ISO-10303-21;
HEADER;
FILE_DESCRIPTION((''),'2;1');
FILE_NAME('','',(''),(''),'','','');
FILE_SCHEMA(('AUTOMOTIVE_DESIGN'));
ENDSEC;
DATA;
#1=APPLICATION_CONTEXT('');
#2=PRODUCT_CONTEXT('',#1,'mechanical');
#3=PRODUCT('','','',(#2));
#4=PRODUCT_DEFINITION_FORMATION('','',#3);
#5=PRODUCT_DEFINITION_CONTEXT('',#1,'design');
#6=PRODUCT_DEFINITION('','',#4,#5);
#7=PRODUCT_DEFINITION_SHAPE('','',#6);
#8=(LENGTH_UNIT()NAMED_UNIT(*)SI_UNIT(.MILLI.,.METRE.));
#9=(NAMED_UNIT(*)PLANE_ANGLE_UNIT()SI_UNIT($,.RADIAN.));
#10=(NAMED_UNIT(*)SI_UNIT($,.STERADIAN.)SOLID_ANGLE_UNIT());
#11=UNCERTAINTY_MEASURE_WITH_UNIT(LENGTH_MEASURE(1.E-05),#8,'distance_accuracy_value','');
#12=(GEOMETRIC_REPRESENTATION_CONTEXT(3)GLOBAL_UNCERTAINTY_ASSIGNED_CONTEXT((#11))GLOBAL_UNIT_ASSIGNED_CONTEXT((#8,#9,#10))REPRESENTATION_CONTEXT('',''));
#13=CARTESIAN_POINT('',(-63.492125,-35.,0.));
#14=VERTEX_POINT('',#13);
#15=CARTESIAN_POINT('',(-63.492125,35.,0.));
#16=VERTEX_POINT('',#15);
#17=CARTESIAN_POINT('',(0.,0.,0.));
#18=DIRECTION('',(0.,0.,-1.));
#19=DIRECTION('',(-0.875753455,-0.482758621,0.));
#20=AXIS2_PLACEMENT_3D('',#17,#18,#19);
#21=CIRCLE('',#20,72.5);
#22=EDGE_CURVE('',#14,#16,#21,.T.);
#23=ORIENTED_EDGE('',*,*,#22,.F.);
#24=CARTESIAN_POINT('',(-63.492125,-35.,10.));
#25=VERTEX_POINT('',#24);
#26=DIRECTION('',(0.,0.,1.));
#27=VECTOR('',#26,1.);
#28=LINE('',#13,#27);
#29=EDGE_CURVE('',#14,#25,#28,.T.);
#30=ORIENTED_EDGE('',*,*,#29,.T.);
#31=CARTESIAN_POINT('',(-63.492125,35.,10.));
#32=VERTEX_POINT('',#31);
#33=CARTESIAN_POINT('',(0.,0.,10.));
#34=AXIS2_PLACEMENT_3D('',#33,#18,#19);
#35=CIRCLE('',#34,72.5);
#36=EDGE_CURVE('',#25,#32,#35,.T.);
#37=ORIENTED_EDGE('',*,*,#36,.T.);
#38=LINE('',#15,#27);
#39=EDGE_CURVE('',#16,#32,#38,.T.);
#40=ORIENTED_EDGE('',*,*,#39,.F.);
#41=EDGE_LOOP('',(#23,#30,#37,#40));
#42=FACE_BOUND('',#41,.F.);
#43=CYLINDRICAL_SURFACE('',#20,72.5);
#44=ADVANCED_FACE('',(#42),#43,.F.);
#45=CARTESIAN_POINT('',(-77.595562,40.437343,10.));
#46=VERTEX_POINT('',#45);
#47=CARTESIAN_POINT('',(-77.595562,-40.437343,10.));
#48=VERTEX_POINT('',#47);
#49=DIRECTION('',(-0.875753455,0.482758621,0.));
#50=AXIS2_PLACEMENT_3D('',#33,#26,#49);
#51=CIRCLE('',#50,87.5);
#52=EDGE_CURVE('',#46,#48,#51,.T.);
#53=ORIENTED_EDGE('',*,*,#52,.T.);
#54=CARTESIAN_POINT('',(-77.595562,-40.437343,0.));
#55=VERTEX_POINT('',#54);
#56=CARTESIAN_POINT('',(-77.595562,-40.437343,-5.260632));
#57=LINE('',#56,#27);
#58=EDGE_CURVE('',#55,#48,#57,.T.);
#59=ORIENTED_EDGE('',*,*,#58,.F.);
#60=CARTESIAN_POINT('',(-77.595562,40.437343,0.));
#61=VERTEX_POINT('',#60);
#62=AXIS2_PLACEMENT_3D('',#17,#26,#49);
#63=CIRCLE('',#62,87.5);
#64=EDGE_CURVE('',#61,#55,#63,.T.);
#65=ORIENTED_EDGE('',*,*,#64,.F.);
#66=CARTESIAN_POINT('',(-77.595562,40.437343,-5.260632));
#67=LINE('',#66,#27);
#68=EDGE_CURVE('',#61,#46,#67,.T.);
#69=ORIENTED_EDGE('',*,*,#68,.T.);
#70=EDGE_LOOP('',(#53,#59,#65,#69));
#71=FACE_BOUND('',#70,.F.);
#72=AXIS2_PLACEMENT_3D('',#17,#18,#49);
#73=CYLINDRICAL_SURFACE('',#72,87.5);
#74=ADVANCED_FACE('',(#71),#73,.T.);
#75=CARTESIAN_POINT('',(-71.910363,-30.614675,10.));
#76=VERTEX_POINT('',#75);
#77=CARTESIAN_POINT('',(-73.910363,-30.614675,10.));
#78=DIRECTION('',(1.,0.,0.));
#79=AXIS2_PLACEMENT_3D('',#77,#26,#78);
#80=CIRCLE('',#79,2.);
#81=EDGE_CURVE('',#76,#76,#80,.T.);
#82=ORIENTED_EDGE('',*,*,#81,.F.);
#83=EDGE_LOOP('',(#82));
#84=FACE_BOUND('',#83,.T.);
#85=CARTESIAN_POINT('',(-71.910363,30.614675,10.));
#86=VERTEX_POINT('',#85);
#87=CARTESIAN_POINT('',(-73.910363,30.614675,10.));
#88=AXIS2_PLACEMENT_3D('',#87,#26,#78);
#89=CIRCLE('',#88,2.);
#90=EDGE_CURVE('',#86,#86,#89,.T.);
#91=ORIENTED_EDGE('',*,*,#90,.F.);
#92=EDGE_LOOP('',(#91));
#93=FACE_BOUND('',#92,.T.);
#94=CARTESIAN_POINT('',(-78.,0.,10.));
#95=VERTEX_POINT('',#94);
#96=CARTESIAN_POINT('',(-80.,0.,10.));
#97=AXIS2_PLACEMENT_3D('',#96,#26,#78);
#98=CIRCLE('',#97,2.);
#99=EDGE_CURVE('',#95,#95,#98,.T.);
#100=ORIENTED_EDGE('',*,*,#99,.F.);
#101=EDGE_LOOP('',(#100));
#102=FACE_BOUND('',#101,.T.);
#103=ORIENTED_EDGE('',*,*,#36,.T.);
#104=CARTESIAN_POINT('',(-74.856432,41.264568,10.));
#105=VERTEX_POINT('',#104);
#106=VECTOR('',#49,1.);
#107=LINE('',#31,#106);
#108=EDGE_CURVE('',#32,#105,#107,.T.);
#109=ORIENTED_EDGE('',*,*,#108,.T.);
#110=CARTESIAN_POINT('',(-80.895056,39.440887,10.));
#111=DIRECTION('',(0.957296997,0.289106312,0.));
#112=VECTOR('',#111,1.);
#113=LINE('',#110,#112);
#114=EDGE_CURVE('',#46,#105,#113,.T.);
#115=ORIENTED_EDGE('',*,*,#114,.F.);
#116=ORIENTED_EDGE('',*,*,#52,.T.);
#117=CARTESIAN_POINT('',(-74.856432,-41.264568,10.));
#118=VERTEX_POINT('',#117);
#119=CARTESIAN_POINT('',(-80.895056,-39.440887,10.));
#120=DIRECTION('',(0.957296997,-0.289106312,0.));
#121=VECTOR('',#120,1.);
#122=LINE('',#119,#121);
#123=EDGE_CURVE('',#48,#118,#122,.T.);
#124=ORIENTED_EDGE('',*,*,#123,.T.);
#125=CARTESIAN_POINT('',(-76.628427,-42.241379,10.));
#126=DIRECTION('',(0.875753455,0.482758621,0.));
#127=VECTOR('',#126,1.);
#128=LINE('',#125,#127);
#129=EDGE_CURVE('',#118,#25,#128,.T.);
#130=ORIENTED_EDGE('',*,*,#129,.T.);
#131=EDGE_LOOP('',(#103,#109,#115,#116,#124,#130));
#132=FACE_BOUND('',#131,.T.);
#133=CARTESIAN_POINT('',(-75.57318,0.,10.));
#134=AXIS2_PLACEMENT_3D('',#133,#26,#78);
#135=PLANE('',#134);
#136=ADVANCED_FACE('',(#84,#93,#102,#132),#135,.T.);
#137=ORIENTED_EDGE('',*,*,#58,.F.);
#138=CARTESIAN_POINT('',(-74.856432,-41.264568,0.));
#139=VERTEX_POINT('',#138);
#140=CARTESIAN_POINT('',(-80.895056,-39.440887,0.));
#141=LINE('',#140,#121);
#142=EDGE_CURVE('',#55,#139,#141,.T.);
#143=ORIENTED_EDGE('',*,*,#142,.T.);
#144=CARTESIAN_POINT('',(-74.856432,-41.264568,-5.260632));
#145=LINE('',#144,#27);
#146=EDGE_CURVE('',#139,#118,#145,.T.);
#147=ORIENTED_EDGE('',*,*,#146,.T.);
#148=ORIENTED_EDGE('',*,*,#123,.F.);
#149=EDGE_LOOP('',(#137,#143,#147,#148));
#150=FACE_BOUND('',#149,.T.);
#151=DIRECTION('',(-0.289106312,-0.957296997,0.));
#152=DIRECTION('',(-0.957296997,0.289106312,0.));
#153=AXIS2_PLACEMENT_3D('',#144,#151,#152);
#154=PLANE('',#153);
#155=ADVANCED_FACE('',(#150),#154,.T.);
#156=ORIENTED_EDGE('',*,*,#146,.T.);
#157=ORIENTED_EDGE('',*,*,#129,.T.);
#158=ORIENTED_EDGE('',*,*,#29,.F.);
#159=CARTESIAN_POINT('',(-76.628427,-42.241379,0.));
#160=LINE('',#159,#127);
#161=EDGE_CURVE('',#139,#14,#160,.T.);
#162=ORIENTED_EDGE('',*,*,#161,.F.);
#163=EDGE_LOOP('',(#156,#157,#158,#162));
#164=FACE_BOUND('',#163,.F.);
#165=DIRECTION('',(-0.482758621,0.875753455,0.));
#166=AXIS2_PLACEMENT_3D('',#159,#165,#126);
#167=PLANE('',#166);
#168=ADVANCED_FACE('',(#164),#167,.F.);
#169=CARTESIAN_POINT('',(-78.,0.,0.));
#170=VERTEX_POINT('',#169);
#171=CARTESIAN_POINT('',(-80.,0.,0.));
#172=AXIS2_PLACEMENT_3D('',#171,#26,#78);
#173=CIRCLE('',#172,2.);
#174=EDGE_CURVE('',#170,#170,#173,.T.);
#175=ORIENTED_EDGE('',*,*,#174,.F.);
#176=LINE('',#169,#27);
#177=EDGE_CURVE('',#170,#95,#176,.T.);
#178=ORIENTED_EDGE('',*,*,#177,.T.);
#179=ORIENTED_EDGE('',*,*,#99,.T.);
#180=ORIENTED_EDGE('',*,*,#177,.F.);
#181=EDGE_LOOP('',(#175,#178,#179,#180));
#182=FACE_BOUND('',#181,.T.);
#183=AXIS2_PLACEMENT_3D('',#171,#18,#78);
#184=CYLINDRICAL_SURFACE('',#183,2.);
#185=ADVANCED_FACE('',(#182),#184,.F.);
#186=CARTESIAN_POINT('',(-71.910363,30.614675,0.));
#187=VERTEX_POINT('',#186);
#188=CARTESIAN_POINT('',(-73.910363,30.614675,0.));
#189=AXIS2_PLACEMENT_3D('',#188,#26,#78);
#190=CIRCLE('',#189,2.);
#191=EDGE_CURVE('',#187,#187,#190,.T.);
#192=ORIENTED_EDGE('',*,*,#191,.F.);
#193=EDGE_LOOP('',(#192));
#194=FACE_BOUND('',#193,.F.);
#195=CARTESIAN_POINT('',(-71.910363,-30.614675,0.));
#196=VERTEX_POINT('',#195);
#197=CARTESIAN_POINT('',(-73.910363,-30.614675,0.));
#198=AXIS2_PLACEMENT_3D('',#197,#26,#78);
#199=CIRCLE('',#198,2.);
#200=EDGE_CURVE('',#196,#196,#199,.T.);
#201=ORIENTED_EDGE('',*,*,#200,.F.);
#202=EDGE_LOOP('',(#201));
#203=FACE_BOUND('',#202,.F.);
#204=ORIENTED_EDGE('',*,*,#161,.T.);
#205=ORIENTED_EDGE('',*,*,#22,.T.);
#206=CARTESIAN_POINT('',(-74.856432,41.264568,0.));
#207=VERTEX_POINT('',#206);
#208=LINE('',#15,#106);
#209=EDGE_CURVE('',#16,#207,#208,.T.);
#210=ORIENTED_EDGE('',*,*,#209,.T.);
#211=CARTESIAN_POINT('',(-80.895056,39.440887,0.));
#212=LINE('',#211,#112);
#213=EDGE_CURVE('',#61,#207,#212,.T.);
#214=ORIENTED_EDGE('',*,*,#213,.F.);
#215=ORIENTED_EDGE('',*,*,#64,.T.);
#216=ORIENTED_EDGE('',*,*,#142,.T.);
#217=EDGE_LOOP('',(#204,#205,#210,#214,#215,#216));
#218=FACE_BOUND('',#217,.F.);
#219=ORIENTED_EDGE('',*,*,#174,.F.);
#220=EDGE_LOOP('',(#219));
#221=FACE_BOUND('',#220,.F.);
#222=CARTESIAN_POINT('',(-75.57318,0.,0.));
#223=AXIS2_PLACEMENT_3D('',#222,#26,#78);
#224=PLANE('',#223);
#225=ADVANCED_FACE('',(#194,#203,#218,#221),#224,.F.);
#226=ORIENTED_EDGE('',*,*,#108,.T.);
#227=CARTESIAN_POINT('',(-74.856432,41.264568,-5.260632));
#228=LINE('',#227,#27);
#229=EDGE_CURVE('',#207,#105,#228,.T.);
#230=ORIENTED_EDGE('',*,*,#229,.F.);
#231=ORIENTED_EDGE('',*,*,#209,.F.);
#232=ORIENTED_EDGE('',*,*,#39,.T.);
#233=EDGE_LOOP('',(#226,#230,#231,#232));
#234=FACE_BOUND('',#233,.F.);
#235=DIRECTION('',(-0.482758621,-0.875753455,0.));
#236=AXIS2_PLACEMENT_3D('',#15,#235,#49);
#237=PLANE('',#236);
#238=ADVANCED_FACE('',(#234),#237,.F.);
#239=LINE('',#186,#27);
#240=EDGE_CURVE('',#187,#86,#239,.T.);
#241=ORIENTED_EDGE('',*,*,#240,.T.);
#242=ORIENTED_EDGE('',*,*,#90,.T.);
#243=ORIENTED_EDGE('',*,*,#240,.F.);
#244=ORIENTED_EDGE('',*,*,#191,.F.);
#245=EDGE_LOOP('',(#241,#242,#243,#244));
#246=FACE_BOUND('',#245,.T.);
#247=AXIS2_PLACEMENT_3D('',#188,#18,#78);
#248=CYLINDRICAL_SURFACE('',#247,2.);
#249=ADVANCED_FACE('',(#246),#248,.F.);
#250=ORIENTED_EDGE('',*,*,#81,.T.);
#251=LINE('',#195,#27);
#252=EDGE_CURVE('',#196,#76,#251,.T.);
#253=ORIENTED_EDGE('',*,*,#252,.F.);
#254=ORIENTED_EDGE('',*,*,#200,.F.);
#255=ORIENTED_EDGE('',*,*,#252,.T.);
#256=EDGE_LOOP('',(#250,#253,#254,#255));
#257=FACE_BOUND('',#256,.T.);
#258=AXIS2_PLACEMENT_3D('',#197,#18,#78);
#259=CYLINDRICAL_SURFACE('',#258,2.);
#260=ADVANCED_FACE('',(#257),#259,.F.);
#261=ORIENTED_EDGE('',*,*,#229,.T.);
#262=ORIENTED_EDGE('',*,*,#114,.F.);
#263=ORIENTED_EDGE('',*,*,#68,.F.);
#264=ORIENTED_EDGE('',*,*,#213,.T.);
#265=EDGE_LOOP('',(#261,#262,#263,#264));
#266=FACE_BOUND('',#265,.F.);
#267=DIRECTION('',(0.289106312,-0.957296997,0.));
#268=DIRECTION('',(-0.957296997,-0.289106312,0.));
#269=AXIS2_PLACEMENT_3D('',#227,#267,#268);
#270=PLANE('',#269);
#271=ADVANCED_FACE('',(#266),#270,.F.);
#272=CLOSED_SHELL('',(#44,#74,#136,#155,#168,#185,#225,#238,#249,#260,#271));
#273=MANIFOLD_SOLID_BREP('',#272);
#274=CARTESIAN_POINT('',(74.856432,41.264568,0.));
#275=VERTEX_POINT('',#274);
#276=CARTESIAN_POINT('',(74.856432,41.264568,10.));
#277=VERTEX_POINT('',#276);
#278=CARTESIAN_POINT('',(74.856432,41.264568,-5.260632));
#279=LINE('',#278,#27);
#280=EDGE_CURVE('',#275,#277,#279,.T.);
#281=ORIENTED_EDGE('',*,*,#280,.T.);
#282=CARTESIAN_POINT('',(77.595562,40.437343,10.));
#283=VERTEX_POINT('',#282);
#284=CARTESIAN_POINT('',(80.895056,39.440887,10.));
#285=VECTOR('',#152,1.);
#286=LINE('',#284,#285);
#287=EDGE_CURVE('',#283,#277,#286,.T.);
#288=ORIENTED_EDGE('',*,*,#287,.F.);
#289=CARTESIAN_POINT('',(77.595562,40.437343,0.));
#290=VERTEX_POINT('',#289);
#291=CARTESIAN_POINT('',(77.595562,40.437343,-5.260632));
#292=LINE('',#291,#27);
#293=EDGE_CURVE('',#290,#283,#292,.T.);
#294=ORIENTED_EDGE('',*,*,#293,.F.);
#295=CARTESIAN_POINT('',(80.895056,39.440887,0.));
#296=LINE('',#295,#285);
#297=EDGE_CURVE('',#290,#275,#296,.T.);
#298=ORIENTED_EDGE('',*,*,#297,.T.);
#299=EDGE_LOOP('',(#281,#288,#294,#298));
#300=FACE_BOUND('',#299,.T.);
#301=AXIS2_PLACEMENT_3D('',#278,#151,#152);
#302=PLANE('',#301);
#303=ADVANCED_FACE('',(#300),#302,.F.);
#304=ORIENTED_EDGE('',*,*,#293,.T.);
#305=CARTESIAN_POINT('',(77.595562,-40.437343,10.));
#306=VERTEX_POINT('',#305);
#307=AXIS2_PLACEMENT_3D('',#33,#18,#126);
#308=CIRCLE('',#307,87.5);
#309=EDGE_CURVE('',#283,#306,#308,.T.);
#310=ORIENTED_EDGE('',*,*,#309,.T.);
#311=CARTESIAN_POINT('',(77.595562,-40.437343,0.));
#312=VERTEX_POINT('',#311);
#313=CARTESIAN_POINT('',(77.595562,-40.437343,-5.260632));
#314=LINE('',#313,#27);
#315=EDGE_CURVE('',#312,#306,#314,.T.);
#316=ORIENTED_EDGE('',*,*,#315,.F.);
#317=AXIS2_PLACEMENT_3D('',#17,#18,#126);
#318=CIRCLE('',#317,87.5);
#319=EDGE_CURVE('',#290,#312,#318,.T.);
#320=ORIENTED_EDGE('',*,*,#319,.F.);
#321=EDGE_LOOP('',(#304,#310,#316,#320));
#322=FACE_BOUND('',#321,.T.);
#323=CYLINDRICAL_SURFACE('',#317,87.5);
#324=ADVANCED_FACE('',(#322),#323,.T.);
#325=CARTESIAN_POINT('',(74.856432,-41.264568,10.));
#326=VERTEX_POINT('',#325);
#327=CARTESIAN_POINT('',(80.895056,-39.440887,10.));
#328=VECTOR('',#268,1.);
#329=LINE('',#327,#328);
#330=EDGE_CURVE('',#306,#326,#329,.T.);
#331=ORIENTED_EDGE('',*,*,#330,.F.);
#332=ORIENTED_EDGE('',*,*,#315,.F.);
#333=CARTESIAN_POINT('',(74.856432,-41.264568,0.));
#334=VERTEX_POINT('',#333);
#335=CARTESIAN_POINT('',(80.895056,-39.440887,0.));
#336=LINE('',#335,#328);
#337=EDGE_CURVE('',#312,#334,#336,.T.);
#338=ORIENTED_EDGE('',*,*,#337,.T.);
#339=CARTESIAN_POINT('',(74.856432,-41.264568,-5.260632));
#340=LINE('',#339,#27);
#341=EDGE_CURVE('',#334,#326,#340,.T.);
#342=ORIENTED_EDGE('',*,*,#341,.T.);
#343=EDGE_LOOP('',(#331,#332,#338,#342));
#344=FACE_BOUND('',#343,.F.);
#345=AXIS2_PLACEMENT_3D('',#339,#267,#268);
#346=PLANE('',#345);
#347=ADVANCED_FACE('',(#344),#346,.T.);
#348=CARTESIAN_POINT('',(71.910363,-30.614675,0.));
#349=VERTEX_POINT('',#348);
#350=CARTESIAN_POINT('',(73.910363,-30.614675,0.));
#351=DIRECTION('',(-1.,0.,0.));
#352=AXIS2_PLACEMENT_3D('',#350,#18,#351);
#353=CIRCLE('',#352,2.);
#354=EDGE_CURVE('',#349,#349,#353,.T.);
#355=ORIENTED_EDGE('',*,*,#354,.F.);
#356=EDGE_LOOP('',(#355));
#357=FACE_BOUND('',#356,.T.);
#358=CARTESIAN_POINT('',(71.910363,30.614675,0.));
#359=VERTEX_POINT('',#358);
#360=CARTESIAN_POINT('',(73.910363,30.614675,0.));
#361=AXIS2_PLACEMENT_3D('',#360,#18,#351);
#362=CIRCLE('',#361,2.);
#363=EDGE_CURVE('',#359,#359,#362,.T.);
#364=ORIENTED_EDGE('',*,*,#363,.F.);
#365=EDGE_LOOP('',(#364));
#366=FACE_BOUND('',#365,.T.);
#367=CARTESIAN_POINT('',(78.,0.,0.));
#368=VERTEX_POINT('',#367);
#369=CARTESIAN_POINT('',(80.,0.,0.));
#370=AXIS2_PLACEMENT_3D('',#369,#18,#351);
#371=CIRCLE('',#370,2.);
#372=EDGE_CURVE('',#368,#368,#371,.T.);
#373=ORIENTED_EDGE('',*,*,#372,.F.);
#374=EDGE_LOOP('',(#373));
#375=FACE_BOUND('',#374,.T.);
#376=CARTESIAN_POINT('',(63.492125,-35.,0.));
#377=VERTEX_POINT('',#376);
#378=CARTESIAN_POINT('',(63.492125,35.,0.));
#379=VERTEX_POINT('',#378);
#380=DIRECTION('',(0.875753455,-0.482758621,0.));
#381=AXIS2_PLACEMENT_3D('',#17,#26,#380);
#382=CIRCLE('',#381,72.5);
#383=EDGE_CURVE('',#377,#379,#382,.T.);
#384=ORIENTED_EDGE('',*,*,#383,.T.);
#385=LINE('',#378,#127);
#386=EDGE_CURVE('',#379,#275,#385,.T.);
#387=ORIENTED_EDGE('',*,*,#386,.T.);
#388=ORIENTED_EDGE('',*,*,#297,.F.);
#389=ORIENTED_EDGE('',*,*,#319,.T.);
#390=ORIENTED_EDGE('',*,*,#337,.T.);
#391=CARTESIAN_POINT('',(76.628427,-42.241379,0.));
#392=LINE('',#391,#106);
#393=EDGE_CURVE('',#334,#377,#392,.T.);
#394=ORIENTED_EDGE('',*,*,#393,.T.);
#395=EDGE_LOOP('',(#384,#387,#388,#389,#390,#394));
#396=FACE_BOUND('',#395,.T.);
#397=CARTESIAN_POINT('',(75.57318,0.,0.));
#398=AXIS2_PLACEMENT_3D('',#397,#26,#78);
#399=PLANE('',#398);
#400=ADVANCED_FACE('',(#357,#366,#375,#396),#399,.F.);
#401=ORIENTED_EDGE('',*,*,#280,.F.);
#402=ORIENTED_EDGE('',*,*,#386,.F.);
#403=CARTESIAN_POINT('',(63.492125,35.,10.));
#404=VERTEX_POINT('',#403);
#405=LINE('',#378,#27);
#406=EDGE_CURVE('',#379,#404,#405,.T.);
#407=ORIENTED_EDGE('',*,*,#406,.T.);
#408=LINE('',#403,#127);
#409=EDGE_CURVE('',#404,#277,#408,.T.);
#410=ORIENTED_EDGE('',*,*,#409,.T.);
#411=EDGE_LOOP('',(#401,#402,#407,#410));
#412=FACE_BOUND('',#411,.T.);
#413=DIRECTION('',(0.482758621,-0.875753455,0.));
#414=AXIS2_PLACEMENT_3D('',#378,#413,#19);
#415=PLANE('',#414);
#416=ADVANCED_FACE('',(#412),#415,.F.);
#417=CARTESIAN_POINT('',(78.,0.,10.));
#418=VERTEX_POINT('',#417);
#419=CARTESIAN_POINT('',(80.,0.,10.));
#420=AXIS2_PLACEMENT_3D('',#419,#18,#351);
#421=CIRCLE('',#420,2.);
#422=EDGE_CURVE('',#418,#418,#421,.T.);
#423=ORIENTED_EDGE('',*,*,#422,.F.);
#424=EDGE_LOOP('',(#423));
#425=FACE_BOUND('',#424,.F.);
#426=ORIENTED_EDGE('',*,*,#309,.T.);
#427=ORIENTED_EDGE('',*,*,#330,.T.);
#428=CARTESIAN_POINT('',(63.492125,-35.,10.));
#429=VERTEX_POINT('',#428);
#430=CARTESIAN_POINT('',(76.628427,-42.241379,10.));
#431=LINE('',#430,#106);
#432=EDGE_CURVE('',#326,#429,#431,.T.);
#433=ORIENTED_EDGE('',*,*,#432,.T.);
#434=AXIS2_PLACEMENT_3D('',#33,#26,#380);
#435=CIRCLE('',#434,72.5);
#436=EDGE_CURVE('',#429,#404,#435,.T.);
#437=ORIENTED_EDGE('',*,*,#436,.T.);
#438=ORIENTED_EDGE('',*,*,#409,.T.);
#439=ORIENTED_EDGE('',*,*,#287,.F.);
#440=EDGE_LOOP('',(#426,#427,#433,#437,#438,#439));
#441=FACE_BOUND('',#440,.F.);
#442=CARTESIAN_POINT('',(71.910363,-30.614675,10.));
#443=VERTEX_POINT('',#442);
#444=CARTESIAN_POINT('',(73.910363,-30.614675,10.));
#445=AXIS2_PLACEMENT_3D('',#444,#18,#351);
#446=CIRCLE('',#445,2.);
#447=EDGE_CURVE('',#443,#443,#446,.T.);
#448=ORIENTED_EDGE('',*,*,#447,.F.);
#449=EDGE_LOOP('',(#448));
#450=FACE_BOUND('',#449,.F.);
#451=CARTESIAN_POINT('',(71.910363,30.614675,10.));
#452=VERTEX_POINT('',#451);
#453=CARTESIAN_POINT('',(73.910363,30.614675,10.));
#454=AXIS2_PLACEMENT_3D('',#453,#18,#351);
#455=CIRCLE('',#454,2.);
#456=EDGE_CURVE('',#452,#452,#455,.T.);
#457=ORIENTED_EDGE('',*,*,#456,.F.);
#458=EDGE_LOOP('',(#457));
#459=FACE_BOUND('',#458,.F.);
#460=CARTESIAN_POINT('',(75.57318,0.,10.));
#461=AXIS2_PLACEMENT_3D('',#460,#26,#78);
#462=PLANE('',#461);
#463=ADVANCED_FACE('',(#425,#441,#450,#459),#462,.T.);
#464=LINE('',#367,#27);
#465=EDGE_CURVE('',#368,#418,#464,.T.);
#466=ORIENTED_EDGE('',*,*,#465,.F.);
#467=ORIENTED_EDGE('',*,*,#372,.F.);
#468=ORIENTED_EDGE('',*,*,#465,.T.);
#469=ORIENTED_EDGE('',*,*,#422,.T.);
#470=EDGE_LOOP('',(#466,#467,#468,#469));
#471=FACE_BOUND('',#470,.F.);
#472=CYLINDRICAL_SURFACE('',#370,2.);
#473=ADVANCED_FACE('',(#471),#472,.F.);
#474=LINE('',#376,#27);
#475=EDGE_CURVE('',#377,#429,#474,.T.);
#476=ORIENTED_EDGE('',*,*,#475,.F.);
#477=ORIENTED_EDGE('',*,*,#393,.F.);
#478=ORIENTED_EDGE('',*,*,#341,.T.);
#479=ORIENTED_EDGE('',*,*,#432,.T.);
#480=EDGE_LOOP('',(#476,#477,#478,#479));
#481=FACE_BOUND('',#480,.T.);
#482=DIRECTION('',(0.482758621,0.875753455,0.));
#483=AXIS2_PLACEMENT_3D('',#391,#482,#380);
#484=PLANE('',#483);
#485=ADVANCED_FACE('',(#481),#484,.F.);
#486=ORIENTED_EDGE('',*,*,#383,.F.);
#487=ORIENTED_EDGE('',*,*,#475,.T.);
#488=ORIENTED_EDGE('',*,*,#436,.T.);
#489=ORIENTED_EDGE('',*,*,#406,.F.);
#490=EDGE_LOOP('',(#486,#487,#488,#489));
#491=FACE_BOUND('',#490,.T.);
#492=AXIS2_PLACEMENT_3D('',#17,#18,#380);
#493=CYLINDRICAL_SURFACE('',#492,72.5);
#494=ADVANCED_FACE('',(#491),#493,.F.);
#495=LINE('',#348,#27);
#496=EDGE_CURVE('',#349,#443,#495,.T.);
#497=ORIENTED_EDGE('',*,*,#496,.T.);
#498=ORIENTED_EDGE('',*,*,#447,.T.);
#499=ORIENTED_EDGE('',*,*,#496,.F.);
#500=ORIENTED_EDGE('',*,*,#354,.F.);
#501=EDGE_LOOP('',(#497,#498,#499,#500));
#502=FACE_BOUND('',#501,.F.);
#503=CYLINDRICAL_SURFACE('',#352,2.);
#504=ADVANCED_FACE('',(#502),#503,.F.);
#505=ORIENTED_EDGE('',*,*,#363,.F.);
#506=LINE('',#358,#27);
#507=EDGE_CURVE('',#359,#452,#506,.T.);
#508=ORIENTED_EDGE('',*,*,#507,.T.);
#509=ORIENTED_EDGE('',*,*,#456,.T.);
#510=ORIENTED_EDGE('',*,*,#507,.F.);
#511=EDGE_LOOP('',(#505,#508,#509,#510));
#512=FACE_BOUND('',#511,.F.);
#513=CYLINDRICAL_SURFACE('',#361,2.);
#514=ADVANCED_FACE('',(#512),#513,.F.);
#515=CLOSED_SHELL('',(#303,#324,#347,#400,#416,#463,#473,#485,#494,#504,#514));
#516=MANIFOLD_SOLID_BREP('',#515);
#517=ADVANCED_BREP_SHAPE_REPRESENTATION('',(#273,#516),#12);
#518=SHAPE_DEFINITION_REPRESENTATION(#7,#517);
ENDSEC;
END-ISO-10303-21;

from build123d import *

# Parameters (mm, degrees)
F0_R        = 2
F1_DEPTH    = 10
F2_T1_DEPTH = 20.5212634911


# Not quite as in the source:
# - a fillet or chamfer that OpenCascade refuses, or shapes differently, is made with other operations: its cross-section is extruded or revolved along the edge and cut away or added


with BuildPart() as f1:
    # F0 (on Top) → F1 (new body)
    with BuildSketch(Plane.XY):
        with BuildLine():
            ThreePointArc((-63.492125496, -35), (-72.5, 0), (-63.492125496, 35))
            Line((-63.492125496, 35), (-76.6284273228, 42.2413793103))
            ThreePointArc((-76.6284273228, 42.2413793103), (-87.5, 0), (-76.6284273228, -42.2413793103))
            Line((-76.6284273228, -42.2413793103), (-63.492125496, -35))
        make_face()
        with Locations((-73.9103626009, -30.6146745892)):
            Circle(F0_R, mode=Mode.SUBTRACT)
        with Locations((-80, 0)):
            Circle(F0_R, mode=Mode.SUBTRACT)
        with Locations((-73.9103626009, 30.6146745892)):
            Circle(F0_R, mode=Mode.SUBTRACT)
    extrude(amount=F1_DEPTH)

    # F2: chamfer of 2 on 2 edges, made by hand

    # F2_s2 → F2_t1 (cut)
    with BuildSketch(Plane.XY.offset(-5.2606317456)):
        with BuildLine():
            Line((-74.8564321485, 41.2645679245), (-77.5955622411, 40.4373431432))
            ThreePointArc((-77.5955622411, 40.4373431432), (-77.1306266641, 41.3172655242), (-76.6284273228, 42.2413793103))
            Line((-76.6284273228, 42.2413793103), (-74.8564321485, 41.2645679245))
        make_face()
        with BuildLine():
            Line((-74.8564321485, -41.2645679245), (-77.5955622411, -40.4373431432))
            ThreePointArc((-77.5955622411, -40.4373431432), (-77.1306266641, -41.3172655242), (-76.6284273228, -42.2413793103))
            Line((-76.6284273228, -42.2413793103), (-74.8564321485, -41.2645679245))
        make_face()
    extrude(amount=F2_T1_DEPTH, mode=Mode.SUBTRACT)


with BuildPart() as f3_1:
    # F3: instance of F1
    add(f1.part.mirror(Plane.YZ))


solid = Compound([f1.part, f3_1.part])
